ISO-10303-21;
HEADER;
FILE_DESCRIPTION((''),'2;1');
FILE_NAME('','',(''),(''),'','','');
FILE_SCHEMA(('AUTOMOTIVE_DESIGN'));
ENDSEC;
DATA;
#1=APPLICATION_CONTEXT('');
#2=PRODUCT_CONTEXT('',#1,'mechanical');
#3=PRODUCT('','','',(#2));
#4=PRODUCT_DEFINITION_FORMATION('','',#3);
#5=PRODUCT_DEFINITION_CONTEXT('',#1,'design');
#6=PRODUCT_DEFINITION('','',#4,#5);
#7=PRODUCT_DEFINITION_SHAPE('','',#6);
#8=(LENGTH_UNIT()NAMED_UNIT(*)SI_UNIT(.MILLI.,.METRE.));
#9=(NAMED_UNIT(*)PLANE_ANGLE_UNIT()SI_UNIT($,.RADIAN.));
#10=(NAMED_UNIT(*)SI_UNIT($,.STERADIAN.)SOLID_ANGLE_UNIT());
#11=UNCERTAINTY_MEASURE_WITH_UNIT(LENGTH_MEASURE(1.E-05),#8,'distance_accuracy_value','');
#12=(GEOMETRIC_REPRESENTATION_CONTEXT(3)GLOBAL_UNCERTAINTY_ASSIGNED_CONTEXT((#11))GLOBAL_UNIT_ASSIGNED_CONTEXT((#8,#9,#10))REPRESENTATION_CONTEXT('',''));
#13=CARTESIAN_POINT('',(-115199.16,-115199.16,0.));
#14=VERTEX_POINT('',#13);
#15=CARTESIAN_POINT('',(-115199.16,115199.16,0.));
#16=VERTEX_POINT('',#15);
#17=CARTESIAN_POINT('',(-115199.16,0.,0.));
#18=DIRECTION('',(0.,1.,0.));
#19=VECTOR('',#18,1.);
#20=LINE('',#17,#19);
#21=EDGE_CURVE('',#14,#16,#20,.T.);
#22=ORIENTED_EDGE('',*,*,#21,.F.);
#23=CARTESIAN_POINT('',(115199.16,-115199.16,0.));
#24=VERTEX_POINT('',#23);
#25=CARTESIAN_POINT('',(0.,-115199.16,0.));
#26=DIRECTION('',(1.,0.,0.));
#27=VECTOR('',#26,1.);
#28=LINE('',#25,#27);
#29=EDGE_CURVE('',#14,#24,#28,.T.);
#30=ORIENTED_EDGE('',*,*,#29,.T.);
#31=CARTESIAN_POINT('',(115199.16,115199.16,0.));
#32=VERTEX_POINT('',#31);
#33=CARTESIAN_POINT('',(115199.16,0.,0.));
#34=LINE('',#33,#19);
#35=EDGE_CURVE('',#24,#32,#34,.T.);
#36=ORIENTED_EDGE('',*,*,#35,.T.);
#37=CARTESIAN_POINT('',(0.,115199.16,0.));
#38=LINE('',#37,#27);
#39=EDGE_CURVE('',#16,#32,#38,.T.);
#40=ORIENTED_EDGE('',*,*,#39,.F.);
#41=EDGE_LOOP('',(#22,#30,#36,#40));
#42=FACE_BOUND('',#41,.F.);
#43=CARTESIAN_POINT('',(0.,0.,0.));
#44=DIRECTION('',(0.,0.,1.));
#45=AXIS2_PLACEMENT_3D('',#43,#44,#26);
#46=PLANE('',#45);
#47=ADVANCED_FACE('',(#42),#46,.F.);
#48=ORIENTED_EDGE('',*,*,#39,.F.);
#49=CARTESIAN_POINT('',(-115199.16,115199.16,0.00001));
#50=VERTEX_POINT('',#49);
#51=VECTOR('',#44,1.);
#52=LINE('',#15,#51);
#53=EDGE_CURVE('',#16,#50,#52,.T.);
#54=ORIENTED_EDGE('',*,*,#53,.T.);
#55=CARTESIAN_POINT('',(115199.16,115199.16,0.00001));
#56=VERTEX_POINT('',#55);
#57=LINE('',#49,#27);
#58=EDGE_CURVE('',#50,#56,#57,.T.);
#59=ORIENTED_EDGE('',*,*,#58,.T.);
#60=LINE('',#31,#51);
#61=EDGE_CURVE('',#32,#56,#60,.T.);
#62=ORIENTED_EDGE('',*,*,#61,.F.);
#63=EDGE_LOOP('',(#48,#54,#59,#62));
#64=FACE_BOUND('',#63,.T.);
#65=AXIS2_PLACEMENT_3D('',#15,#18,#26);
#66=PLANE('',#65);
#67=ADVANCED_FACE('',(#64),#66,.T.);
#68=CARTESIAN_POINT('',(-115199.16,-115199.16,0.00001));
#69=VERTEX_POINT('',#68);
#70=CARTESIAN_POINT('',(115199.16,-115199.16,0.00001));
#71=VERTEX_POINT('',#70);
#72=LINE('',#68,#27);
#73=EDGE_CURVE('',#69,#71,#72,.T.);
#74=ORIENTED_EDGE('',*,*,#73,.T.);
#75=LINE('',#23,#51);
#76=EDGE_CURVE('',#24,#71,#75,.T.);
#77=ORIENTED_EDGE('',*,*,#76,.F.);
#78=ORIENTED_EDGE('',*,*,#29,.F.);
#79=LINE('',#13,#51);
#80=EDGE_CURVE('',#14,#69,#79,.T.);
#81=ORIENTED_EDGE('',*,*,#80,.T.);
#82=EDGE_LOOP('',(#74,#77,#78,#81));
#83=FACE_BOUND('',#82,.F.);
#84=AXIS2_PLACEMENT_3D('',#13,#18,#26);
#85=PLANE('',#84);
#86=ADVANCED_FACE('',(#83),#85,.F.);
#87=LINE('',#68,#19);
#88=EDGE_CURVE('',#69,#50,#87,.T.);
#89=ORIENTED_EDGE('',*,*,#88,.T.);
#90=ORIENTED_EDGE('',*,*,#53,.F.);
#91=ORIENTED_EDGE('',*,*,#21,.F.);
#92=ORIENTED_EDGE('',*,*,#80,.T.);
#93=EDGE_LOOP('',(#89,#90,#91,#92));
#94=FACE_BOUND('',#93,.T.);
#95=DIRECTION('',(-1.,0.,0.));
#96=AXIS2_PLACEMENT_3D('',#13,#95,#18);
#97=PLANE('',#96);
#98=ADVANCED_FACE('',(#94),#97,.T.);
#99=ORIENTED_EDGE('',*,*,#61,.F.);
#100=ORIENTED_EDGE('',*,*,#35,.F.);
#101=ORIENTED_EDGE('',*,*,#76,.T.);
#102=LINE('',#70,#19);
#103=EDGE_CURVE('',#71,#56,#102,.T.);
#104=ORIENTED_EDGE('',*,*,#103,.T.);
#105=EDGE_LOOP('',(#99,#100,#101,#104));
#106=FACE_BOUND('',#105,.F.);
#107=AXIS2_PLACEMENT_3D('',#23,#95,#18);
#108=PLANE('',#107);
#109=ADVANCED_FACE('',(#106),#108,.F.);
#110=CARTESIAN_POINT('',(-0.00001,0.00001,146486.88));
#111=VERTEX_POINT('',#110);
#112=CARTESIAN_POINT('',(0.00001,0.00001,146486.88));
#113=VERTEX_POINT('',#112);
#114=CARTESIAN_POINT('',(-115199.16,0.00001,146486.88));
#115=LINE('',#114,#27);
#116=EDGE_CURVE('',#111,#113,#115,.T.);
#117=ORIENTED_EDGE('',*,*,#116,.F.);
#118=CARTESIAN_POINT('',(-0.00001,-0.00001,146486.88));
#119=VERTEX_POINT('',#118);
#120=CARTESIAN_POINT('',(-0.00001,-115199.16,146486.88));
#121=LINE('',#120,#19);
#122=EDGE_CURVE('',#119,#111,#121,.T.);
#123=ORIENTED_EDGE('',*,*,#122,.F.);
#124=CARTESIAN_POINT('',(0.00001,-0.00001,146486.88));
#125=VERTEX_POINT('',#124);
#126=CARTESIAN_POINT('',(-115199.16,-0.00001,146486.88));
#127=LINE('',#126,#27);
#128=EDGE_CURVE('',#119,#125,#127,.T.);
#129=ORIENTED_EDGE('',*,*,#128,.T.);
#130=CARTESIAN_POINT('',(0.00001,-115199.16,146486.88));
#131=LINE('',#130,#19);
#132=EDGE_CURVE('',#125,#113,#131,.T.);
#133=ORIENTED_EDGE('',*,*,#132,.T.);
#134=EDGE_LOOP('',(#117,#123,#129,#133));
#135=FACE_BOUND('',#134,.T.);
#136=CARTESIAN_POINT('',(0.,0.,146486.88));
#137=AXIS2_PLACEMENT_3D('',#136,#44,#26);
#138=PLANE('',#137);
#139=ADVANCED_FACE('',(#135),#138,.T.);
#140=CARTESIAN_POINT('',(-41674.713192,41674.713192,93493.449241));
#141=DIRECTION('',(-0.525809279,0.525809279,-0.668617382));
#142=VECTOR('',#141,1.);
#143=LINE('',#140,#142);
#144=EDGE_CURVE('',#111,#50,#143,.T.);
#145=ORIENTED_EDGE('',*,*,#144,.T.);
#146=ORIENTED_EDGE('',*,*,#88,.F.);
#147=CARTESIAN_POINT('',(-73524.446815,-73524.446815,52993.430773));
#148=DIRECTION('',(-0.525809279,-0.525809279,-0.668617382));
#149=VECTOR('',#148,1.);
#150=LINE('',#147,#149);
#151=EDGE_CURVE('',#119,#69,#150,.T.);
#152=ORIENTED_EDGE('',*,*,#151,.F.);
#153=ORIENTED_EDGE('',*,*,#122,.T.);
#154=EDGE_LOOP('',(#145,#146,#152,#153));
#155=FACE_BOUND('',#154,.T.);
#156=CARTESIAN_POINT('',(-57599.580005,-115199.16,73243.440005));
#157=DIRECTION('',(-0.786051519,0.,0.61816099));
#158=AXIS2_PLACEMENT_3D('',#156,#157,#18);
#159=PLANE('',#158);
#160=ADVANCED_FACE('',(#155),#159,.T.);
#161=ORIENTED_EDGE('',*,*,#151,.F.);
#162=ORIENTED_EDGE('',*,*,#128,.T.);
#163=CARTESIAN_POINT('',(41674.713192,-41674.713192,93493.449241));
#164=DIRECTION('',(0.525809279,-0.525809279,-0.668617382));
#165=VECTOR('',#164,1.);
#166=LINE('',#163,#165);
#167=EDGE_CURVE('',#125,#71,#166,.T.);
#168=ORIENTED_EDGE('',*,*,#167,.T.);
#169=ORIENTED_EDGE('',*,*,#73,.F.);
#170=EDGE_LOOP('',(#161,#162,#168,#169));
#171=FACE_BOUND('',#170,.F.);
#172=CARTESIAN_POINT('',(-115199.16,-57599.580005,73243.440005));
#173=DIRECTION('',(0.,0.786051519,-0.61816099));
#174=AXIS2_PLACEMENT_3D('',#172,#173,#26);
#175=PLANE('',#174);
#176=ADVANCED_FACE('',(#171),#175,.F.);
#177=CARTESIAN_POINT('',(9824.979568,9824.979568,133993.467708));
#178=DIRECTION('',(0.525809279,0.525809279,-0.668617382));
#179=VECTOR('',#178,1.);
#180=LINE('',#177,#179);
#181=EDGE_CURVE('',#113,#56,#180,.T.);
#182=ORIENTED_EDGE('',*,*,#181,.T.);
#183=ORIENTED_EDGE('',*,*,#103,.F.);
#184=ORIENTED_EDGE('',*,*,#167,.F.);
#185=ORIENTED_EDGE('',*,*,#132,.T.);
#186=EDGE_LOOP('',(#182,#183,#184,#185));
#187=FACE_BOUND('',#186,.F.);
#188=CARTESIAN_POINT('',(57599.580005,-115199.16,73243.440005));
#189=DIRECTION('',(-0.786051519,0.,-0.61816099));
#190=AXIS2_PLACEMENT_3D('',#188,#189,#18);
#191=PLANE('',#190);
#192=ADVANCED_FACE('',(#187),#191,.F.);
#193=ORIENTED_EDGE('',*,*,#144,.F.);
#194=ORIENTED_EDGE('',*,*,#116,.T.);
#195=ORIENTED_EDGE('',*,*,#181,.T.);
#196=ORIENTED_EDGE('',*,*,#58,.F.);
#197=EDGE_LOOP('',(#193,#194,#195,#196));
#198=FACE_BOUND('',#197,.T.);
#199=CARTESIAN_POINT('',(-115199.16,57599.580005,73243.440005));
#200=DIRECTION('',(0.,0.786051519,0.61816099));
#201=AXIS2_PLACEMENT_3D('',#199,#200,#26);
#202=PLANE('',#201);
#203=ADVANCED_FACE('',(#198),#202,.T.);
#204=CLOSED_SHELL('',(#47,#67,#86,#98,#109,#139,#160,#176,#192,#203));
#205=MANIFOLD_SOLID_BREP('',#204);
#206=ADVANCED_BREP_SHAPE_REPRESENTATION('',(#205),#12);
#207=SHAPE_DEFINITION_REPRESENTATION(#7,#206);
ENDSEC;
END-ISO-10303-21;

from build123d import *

# Parameters (mm, degrees)
F0_W     = 230398.32
F0_H     = 230398.32
F1_DEPTH = 146486.88
F2_SIZE2 = 146486.87999
F2_SIZE  = 115199.15999


# Not quite as in the source:
# - a fillet or chamfer is up to 0.001 mm smaller than in the source, because OpenCascade refuses the exact size


with BuildPart() as f1:
    # F0 (on Top) → F1 (new body)
    with BuildSketch(Plane.XY):
        Rectangle(F0_W, F0_H)
    extrude(amount=F1_DEPTH)

    # F2 (size 115199.16 and 146486.88 in the source; OpenCascade refuses exactly that, so slightly less here)
    f2_edges = [f1.edges().sort_by_distance(p)[0] for p in [
        (115199.16, 0, 146486.88),
        (0, 115199.16, 146486.88),
        (-115199.16, 0, 146486.88),
        (0, -115199.16, 146486.88),
    ]]
    f2_side = f1.faces().sort_by_distance((0, 0, 146486.88))[0]
    chamfer(f2_edges, length=F2_SIZE, length2=F2_SIZE2, reference=f2_side)


solid = f1.part
